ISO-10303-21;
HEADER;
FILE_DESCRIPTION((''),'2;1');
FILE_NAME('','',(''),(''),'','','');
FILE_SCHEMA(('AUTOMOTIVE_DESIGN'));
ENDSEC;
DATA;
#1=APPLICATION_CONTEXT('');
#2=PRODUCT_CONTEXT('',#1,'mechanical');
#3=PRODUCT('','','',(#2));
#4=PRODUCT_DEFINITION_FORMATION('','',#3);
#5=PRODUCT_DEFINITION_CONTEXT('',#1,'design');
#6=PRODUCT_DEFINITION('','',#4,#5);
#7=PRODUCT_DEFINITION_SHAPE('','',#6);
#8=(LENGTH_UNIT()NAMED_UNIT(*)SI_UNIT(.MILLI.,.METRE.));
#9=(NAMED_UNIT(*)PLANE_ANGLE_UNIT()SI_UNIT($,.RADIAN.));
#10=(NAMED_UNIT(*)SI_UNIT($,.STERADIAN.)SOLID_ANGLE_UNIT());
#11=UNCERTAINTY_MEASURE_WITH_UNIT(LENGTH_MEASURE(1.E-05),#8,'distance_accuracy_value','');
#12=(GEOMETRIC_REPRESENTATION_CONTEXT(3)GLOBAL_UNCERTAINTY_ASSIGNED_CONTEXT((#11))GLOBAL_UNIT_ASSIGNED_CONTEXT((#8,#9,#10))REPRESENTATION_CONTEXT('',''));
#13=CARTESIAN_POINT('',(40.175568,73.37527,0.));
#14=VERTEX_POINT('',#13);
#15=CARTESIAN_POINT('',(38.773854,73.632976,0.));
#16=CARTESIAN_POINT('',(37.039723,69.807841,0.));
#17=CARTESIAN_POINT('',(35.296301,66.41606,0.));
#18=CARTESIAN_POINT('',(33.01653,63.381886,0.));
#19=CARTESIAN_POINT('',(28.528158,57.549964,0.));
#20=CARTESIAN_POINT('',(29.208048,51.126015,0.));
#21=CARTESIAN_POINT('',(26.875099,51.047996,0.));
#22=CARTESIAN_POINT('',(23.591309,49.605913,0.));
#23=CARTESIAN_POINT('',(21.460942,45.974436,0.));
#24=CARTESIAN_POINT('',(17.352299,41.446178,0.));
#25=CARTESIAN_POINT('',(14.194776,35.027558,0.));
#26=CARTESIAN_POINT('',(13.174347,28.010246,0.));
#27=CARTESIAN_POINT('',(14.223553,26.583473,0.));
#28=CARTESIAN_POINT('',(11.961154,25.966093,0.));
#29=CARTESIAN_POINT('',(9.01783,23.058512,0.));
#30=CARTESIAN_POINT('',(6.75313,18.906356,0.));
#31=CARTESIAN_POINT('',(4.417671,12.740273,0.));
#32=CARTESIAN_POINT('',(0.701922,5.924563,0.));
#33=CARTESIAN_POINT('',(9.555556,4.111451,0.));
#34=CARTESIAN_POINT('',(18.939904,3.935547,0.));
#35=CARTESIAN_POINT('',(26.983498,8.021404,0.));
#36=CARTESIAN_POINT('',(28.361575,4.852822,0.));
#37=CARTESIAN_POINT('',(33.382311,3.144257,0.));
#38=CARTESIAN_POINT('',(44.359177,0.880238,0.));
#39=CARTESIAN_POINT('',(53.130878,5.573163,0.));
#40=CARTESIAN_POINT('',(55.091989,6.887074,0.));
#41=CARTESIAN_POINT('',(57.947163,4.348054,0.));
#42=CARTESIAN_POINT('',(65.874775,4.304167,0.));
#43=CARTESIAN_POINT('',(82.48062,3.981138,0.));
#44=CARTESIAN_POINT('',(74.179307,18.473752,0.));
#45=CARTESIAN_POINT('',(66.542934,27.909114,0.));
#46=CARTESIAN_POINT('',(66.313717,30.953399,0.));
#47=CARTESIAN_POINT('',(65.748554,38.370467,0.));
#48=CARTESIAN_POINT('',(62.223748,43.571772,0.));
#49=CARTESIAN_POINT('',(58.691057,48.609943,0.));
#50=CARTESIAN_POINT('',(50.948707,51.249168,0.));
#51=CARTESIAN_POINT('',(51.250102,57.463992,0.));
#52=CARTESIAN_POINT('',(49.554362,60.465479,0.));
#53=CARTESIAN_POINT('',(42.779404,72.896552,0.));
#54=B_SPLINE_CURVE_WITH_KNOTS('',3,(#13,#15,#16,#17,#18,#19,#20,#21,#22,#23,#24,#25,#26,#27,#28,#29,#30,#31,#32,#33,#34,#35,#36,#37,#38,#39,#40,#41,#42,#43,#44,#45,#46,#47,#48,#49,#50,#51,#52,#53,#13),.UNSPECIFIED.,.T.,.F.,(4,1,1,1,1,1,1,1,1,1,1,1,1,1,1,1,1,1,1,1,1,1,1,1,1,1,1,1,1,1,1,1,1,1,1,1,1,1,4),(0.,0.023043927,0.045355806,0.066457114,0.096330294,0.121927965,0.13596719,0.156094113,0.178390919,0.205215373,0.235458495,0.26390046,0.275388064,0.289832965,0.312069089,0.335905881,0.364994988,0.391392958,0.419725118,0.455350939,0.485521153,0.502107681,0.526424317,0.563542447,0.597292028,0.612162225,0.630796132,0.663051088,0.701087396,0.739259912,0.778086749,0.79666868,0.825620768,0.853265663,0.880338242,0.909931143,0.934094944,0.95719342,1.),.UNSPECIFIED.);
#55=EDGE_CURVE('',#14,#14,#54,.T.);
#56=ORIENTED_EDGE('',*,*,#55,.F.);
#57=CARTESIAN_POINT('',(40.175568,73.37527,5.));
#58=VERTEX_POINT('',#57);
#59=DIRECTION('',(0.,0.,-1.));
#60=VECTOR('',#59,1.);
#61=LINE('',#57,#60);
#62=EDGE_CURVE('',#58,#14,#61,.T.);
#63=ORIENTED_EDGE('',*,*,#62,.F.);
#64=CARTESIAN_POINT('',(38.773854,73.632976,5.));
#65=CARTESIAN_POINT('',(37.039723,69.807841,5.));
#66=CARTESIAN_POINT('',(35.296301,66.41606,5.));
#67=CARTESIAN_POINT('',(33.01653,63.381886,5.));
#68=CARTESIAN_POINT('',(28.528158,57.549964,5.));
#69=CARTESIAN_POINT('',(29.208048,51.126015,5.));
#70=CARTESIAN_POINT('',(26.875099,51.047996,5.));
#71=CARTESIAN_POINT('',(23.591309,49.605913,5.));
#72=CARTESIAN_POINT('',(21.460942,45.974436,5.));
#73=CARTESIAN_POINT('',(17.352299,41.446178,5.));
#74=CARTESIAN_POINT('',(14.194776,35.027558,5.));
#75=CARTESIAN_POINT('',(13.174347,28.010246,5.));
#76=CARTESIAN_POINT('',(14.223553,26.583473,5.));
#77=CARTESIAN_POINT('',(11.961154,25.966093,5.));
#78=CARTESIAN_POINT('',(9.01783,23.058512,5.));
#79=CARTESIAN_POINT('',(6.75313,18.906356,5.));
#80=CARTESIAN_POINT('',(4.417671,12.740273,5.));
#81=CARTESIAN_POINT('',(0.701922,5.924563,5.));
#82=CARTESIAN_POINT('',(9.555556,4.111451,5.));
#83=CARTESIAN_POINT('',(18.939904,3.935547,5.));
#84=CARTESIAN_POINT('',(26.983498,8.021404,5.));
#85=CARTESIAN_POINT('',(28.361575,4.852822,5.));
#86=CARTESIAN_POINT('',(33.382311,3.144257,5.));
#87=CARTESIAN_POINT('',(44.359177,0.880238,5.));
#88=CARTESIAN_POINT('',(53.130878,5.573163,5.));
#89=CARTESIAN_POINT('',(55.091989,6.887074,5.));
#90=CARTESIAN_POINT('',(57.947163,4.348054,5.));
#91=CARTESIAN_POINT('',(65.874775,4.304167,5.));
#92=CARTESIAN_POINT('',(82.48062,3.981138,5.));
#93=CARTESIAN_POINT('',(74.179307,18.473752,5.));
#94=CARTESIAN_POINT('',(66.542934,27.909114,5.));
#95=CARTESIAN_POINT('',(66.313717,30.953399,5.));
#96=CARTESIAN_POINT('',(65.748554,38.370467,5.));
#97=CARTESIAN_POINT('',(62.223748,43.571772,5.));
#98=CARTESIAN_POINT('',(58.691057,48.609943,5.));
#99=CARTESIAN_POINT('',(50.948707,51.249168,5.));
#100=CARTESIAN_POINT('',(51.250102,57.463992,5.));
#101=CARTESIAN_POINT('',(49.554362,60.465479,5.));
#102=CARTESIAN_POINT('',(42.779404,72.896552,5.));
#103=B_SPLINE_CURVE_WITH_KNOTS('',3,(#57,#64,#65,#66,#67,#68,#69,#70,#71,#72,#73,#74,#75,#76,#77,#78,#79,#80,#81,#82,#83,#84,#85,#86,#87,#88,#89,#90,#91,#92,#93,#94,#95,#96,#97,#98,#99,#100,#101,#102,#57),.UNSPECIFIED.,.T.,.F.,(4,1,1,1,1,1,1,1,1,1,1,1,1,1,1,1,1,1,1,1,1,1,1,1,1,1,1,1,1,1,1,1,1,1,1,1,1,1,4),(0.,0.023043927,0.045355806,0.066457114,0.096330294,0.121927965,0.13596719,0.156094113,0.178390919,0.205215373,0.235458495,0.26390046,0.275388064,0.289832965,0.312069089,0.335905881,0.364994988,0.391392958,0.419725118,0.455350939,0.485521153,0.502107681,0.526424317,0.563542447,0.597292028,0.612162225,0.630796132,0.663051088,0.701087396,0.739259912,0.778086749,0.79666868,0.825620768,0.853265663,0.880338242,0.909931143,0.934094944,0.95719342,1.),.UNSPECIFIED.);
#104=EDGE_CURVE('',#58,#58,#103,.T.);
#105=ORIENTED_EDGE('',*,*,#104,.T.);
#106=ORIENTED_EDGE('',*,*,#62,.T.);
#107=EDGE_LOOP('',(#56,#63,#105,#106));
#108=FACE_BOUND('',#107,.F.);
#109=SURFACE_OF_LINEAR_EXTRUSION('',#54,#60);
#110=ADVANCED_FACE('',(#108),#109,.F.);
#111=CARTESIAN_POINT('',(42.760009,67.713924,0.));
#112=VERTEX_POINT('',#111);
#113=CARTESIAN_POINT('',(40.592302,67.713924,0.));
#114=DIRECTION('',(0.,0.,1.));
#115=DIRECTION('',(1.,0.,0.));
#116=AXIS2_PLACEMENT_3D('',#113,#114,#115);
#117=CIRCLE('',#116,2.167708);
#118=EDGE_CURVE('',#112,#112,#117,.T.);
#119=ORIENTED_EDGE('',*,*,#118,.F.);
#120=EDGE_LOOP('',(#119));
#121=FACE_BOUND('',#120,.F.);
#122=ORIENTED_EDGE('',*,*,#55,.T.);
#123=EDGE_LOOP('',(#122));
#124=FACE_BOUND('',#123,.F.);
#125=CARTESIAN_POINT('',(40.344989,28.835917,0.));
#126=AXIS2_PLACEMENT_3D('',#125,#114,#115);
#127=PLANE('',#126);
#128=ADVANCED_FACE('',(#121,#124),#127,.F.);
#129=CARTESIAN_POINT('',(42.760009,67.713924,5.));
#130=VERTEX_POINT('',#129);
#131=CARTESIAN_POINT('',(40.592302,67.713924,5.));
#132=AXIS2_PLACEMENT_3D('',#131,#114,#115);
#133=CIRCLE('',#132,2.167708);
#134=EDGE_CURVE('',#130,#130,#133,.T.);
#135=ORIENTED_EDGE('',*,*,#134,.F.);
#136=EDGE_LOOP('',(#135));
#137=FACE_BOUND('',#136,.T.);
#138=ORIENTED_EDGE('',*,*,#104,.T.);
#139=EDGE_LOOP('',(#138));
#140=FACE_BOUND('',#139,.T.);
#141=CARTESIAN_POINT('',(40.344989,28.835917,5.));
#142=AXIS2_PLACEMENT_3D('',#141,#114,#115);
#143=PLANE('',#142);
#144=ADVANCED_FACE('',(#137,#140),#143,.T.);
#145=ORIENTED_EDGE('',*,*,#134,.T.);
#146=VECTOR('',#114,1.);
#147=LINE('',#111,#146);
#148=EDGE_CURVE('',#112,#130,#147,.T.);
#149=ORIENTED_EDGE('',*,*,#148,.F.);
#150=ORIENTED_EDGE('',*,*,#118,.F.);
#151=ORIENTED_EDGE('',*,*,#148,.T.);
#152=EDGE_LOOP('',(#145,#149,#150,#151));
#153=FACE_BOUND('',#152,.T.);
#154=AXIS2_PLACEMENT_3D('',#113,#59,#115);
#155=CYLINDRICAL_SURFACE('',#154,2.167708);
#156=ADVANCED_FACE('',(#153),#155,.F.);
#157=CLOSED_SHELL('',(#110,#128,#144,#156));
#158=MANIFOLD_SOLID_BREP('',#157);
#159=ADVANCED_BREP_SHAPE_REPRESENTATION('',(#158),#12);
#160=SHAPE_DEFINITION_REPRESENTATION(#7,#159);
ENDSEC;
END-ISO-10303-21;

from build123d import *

# Parameters (mm, degrees)
F0_R      = 2.1677075124
F1_DEPTH  = 5
F22_DEPTH = 1


# Not quite as in the source:
# - the program builds the solid bodies; features that only make, move or delete a surface that nothing else refers to are left out


with BuildPart() as f1:
    # F0 (on Top) → F1 (new body)
    with BuildSketch(Plane.XY):
        with BuildLine():
            add(Edge.make_bspline(
                [(40.1755683124, 73.3752697706), (38.7738536908, 73.6329763294), (37.0397231233, 69.8078414808), (35.296300795, 66.4160600882), (33.0165298684, 63.3818863105), (28.5281579812, 57.54996442), (29.2080482989, 51.1260150857), (26.8750986244, 51.0479956768), (23.5913091085, 49.6059134152), (21.4609417314, 45.9744364473), (17.3522987297, 41.4461778552), (14.1947755243, 35.027557672), (13.1743465653, 28.0102457802), (14.2235529323, 26.5834728824), (11.96115391, 25.9660934767), (9.0178297831, 23.0585124898), (6.7531303526, 18.9063559913), (4.4176713861, 12.7402725008), (0.7019220994, 5.9245631673), (9.5555563077, 4.1114505526), (18.9399035673, 3.9355471624), (26.9834982739, 8.0214044539), (28.3615750008, 4.8528221744), (33.3823107874, 3.1442572994), (44.3591772545, 0.8802375496), (53.1308781915, 5.5731632508), (55.0919888579, 6.8870737383), (57.9471626601, 4.3480542693), (65.8747745815, 4.3041671001), (82.4806196859, 3.9811379019), (74.1793070499, 18.4737516588), (66.5429336412, 27.9091143572), (66.3137165708, 30.9533987516), (65.7485539565, 38.3704674859), (62.22374839, 43.571772342), (58.6910569926, 48.60994325), (50.948707278, 51.249168376), (51.2501021264, 57.4639921826), (49.554362213, 60.4654785603), (42.7794043821, 72.8965520468), (40.1755683124, 73.3752697706)],
                knots=[0, 0, 0, 0, 0.0230439272, 0.0453558062, 0.0664571143, 0.0963302943, 0.1219279647, 0.1359671901, 0.1560941129, 0.178390919, 0.2052153731, 0.2354584948, 0.2639004598, 0.275388064, 0.2898329647, 0.312069089, 0.3359058806, 0.3649949879, 0.3913929581, 0.419725118, 0.4553509393, 0.485521153, 0.5021076814, 0.526424317, 0.5635424468, 0.5972920276, 0.612162225, 0.6307961322, 0.6630510879, 0.7010873964, 0.7392599123, 0.7780867485, 0.7966686803, 0.8256207675, 0.8532656635, 0.8803382417, 0.9099311428, 0.9340949437, 0.9571934202, 1, 1, 1, 1], degree=3))
        make_face()
        with Locations((40.5923016369, 67.7139237523)):
            Circle(F0_R, mode=Mode.SUBTRACT)
    extrude(amount=F1_DEPTH)

    # F0 (on Top) → F22 (join)
    with BuildSketch(Plane.XY):
        with BuildLine():
            add(Edge.make_bspline(
                [(40.1755683124, 73.3752697706), (38.7738536908, 73.6329763294), (37.0397231233, 69.8078414808), (35.296300795, 66.4160600882), (33.0165298684, 63.3818863105), (28.5281579812, 57.54996442), (29.2080482989, 51.1260150857), (26.8750986244, 51.0479956768), (23.5913091085, 49.6059134152), (21.4609417314, 45.9744364473), (17.3522987297, 41.4461778552), (14.1947755243, 35.027557672), (13.1743465653, 28.0102457802), (14.2235529323, 26.5834728824), (11.96115391, 25.9660934767), (9.0178297831, 23.0585124898), (6.7531303526, 18.9063559913), (4.4176713861, 12.7402725008), (0.7019220994, 5.9245631673), (9.5555563077, 4.1114505526), (18.9399035673, 3.9355471624), (26.9834982739, 8.0214044539), (28.3615750008, 4.8528221744), (33.3823107874, 3.1442572994), (44.3591772545, 0.8802375496), (53.1308781915, 5.5731632508), (55.0919888579, 6.8870737383), (57.9471626601, 4.3480542693), (65.8747745815, 4.3041671001), (82.4806196859, 3.9811379019), (74.1793070499, 18.4737516588), (66.5429336412, 27.9091143572), (66.3137165708, 30.9533987516), (65.7485539565, 38.3704674859), (62.22374839, 43.571772342), (58.6910569926, 48.60994325), (50.948707278, 51.249168376), (51.2501021264, 57.4639921826), (49.554362213, 60.4654785603), (42.7794043821, 72.8965520468), (40.1755683124, 73.3752697706)],
                knots=[0, 0, 0, 0, 0.0230439272, 0.0453558062, 0.0664571143, 0.0963302943, 0.1219279647, 0.1359671901, 0.1560941129, 0.178390919, 0.2052153731, 0.2354584948, 0.2639004598, 0.275388064, 0.2898329647, 0.312069089, 0.3359058806, 0.3649949879, 0.3913929581, 0.419725118, 0.4553509393, 0.485521153, 0.5021076814, 0.526424317, 0.5635424468, 0.5972920276, 0.612162225, 0.6307961322, 0.6630510879, 0.7010873964, 0.7392599123, 0.7780867485, 0.7966686803, 0.8256207675, 0.8532656635, 0.8803382417, 0.9099311428, 0.9340949437, 0.9571934202, 1, 1, 1, 1], degree=3))
        make_face()
        with Locations((40.5923016369, 67.7139237523)):
            Circle(F0_R, mode=Mode.SUBTRACT)
    extrude(amount=F22_DEPTH)


solid = f1.part
